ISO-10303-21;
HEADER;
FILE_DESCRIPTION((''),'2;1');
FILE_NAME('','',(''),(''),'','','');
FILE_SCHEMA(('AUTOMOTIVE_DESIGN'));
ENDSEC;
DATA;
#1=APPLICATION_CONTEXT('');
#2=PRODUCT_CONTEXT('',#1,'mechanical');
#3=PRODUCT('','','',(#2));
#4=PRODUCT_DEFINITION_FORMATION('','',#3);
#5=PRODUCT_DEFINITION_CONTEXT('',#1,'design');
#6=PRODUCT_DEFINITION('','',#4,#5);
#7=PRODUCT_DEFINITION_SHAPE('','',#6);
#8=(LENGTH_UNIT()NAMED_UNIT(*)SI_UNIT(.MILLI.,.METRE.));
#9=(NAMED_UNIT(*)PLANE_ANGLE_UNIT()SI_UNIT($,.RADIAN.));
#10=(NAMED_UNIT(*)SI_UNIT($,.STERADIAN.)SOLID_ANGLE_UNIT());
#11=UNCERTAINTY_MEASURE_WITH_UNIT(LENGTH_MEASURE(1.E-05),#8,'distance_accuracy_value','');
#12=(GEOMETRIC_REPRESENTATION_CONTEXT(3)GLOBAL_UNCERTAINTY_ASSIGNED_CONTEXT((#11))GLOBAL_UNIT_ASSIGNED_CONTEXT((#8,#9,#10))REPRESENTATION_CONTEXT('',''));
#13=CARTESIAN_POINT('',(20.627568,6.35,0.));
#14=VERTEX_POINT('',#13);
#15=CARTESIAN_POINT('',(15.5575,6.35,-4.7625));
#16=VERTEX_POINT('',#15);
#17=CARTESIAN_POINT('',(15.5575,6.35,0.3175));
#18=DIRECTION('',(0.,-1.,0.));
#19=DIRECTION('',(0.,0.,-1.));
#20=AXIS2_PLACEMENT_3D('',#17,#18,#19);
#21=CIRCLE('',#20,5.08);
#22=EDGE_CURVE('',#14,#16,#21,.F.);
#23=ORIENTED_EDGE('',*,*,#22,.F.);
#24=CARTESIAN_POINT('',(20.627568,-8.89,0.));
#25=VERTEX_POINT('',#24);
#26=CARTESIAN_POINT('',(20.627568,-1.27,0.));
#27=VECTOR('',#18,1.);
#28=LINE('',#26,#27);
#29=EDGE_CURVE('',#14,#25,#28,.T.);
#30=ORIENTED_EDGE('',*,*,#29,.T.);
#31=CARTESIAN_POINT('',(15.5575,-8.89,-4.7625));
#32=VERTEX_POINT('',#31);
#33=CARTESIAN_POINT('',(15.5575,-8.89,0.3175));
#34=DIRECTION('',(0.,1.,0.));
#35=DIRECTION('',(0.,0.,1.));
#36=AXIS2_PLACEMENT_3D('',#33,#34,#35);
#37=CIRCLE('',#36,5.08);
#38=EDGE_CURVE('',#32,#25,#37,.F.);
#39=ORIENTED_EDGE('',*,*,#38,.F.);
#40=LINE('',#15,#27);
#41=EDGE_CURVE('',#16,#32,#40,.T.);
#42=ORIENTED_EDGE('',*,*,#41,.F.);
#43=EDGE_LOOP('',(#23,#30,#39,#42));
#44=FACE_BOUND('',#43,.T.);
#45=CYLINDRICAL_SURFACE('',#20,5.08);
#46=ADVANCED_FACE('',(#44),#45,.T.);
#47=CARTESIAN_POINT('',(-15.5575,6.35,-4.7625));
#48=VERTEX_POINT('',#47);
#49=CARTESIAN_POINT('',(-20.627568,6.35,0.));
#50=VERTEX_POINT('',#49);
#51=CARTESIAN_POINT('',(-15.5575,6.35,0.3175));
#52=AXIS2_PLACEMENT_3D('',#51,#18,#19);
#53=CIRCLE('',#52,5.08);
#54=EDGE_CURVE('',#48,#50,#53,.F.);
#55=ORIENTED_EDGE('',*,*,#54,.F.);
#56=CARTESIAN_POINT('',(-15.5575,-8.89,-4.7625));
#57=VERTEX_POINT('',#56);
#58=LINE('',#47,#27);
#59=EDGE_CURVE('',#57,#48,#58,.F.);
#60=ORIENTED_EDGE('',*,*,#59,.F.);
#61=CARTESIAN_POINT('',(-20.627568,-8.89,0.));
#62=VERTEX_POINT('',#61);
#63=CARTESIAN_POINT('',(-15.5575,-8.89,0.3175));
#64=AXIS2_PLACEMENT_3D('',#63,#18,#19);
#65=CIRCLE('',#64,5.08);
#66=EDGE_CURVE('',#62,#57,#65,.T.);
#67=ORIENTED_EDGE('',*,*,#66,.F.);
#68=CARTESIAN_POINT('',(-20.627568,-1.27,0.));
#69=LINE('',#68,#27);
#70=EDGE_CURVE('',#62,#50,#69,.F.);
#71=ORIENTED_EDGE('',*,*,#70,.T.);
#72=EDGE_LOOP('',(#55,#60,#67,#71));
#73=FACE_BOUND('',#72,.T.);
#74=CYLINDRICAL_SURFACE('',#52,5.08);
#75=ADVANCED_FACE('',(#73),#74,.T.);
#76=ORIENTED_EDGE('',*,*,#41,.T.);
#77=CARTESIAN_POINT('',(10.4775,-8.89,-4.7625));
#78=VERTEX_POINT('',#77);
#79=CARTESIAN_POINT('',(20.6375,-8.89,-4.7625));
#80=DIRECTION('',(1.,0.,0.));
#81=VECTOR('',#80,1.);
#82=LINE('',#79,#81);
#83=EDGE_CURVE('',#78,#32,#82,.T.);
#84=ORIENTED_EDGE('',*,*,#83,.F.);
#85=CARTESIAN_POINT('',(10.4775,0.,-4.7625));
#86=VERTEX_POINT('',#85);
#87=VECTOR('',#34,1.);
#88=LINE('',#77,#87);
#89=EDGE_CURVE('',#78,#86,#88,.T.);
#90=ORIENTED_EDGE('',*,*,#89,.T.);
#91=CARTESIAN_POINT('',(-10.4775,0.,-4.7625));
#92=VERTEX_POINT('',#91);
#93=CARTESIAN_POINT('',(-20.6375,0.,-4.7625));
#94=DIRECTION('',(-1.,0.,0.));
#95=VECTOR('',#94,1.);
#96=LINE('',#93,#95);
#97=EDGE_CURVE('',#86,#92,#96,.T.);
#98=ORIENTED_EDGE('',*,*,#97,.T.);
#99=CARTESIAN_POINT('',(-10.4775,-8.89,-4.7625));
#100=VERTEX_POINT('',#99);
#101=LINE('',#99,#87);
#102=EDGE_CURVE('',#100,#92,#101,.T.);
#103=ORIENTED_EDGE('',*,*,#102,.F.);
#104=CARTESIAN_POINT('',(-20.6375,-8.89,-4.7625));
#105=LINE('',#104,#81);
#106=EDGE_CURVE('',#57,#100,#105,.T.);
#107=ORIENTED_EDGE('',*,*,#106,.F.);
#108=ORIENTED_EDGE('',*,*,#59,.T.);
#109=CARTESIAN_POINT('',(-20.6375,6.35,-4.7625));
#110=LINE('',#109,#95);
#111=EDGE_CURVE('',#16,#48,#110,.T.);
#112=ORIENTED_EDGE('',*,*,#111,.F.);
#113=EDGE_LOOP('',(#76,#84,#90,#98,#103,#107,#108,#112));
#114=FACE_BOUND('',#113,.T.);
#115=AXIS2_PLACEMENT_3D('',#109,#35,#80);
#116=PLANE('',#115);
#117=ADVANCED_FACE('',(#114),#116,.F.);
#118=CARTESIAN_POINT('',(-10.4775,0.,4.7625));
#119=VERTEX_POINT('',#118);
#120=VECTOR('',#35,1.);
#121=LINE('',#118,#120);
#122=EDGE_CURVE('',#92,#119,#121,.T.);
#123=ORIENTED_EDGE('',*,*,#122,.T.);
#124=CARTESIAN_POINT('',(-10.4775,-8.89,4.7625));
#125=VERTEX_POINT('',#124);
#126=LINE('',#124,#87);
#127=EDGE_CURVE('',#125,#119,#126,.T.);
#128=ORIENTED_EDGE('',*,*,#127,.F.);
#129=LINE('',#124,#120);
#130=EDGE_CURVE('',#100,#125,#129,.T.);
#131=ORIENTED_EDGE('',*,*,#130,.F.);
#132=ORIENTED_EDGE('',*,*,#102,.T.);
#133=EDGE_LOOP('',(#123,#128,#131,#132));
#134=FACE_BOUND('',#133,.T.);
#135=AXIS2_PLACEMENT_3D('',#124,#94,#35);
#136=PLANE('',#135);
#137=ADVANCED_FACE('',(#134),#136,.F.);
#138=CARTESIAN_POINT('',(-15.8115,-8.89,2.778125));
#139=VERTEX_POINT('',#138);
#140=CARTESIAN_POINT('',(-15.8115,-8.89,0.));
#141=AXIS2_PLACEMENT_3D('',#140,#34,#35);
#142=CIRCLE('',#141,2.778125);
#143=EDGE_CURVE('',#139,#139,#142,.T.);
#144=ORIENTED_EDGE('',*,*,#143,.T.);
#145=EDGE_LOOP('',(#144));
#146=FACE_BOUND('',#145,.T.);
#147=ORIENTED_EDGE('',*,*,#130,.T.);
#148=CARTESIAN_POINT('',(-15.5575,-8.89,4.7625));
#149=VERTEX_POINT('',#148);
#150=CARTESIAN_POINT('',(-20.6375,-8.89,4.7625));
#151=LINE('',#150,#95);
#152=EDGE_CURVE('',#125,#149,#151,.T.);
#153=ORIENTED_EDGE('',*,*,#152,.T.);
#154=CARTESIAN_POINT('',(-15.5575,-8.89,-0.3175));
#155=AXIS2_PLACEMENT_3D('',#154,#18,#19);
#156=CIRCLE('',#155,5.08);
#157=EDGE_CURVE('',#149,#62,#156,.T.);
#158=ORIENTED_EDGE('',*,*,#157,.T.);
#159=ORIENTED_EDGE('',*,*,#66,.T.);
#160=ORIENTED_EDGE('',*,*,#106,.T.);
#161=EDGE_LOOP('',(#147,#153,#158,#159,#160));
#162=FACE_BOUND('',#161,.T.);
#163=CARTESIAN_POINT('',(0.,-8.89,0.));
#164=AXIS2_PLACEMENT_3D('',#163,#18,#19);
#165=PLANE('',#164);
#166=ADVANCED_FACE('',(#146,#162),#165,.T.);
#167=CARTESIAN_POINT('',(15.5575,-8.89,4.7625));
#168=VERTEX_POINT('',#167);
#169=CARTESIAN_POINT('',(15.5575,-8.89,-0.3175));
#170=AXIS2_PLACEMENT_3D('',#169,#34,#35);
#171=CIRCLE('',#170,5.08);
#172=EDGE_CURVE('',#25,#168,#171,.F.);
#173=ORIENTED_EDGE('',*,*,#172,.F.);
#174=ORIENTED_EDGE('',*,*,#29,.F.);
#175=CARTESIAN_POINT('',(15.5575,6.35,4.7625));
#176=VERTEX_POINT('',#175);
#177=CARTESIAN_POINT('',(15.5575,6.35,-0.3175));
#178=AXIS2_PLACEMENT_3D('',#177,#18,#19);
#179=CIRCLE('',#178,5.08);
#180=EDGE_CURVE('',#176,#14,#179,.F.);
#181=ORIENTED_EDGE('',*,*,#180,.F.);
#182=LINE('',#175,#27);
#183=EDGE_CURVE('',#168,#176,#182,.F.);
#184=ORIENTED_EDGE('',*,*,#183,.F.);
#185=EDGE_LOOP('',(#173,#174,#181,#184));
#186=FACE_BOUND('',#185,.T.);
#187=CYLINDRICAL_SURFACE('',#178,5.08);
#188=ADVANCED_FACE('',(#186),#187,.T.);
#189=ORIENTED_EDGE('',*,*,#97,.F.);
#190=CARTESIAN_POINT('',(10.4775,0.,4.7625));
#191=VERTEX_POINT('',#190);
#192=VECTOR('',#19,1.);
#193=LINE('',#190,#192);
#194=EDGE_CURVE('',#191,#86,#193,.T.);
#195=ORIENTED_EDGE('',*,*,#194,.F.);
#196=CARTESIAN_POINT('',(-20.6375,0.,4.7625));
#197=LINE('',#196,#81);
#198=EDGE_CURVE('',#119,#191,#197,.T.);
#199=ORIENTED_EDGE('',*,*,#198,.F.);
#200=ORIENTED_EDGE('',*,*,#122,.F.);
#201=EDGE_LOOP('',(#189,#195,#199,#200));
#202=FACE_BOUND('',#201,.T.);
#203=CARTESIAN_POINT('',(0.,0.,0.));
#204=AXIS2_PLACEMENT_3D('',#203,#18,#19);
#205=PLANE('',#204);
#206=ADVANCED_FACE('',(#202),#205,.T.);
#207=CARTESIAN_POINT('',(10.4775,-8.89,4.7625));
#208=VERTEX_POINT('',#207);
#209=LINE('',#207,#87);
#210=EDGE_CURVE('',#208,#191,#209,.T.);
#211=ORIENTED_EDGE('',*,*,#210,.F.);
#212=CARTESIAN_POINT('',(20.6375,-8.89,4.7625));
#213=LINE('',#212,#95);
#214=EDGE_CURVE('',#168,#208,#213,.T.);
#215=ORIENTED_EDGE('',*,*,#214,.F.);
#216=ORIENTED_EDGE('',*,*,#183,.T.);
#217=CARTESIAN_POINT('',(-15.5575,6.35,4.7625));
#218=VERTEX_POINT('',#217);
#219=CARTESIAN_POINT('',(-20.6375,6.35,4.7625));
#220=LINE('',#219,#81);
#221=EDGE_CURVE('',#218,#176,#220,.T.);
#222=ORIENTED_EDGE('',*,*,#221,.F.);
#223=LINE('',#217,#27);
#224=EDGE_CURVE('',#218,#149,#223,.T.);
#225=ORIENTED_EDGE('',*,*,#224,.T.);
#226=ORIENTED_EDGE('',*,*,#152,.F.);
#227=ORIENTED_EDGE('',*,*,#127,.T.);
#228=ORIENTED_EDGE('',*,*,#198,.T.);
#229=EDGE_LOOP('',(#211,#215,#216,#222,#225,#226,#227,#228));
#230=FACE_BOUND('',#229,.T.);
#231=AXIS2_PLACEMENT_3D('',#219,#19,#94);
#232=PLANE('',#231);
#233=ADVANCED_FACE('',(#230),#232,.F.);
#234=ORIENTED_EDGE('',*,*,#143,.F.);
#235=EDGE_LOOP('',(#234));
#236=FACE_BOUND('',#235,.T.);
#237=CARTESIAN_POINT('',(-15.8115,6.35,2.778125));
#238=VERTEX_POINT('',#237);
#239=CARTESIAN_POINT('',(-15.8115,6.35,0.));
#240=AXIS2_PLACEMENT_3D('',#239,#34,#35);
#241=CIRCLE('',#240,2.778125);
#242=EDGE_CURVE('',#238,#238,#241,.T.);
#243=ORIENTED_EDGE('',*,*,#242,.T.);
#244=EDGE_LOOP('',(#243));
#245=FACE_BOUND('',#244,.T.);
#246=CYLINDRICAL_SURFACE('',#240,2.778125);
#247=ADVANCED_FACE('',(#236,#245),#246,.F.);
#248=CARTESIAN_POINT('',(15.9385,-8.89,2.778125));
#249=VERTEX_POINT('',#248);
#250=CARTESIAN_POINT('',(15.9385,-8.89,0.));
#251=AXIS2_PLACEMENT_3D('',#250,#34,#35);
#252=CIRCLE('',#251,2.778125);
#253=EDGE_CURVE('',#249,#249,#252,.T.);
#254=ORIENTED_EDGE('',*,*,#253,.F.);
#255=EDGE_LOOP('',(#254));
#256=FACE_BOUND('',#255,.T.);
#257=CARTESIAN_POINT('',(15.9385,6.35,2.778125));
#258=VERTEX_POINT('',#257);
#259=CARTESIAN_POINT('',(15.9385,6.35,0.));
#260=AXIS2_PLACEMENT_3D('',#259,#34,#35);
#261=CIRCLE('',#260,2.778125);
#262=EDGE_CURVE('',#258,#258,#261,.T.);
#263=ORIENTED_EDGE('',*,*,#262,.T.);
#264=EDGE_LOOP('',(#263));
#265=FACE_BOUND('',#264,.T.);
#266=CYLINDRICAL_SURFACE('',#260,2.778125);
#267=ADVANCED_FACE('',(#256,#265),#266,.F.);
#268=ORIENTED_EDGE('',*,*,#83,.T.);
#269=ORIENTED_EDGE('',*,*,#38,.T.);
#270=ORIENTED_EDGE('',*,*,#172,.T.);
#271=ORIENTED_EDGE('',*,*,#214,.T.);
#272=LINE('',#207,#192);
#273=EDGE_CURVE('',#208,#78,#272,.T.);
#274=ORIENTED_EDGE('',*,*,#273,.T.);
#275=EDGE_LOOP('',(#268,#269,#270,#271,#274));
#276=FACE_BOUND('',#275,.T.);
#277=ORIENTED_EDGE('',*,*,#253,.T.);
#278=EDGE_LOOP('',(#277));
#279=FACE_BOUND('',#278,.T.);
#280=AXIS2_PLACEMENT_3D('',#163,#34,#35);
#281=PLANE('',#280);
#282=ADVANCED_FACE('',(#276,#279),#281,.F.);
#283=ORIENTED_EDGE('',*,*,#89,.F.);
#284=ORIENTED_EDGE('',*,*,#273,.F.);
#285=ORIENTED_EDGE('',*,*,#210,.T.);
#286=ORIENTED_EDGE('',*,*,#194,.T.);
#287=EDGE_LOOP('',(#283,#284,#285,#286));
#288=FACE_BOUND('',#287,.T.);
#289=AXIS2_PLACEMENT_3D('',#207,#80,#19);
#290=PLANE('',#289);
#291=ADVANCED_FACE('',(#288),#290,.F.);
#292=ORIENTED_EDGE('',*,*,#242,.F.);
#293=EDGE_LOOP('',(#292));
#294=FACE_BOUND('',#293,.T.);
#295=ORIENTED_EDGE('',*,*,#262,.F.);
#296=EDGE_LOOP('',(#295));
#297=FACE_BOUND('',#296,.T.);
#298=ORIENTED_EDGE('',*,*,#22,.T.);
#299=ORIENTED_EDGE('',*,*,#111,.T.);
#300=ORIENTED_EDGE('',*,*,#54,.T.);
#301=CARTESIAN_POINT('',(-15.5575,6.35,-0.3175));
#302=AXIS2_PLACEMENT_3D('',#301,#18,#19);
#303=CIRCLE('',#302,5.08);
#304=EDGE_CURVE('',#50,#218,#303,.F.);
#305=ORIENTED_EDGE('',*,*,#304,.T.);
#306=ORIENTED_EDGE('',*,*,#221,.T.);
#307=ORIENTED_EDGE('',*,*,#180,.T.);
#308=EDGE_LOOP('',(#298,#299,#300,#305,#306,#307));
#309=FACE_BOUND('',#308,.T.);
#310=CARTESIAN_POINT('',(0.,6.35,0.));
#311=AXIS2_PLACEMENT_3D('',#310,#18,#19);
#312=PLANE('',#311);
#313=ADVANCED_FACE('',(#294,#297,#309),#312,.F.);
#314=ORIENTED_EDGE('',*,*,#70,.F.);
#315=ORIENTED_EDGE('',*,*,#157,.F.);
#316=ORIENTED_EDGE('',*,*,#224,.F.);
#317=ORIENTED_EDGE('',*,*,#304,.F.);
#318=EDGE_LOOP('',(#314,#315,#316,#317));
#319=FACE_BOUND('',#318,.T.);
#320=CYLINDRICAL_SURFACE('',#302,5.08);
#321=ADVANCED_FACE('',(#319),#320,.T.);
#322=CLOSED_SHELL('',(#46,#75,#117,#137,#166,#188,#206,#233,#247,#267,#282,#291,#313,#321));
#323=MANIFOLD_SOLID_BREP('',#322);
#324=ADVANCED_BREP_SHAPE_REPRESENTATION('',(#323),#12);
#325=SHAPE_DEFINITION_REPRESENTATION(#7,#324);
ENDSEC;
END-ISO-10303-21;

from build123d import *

# Parameters (mm, degrees)
SKETCH1_W                       = 41.275
SKETCH1_H                       = 9.525
BOSS_EXTRUDE1_DEPTH             = 6.35
SKETCH2_W                       = 10.16
SKETCH2_H                       = 9.525
BOSS_EXTRUDE2_DEPTH             = 8.89
F_7_32_0_21875_DIAMETER_HOLE1_D = 5.55625
FILLET1_R                       = 5.08


with BuildPart() as part:
    # Sketch1 → Boss-Extrude1 (new body)
    with BuildSketch(Plane(origin=(0, 0, 0), x_dir=(1, 0, 0), z_dir=(0, 1, 0))):
        Rectangle(SKETCH1_W, SKETCH1_H)
    extrude(amount=BOSS_EXTRUDE1_DEPTH)

    # Sketch2 → Boss-Extrude2 (add)
    with BuildSketch(Plane.XZ):
        with Locations((-15.5575, 0)):
            Rectangle(SKETCH2_W, SKETCH2_H)
        with Locations((15.5575, 0)):
            Rectangle(SKETCH2_W, SKETCH2_H)
    extrude(amount=BOSS_EXTRUDE2_DEPTH)

    # 7/32 (0.21875) Diameter Hole1 (through all)
    with Locations(Plane(origin=(0, 6.35, 0), x_dir=(1, 0, 0), z_dir=(0, 1, 0))):
        with Locations((-15.8115, 0), (15.9385, 0)):
            Hole(F_7_32_0_21875_DIAMETER_HOLE1_D / 2)

    # Fillet1
    # the kernel refuses this fillet: 5.08 mm, written as the material it takes off along each edge
    with BuildSketch(Plane(origin=(20.6375, -21.59, -4.7625), x_dir=(0, 0, 1), z_dir=(0, 1, 0)), Plane(origin=(20.6375, -21.59, 4.7625), x_dir=(-1, 0, 0), z_dir=(0, 1, 0)), Plane(origin=(-20.6375, 19.05, -4.7625), x_dir=(0, 0, 1), z_dir=(0, -1, 0)), Plane(origin=(-20.6375, 19.05, 4.7625), x_dir=(1, 0, 0), z_dir=(0, -1, 0))) as fillet1_piece_1:
        with BuildLine():
            CenterArc((FILLET1_R, -FILLET1_R), FILLET1_R, 90, 90)
            Line((0, -FILLET1_R), (0, 0))
            Line((0, 0), (FILLET1_R, 0))
        make_face()
    extrude(amount=40.64, mode=Mode.SUBTRACT)


solid = part.part
